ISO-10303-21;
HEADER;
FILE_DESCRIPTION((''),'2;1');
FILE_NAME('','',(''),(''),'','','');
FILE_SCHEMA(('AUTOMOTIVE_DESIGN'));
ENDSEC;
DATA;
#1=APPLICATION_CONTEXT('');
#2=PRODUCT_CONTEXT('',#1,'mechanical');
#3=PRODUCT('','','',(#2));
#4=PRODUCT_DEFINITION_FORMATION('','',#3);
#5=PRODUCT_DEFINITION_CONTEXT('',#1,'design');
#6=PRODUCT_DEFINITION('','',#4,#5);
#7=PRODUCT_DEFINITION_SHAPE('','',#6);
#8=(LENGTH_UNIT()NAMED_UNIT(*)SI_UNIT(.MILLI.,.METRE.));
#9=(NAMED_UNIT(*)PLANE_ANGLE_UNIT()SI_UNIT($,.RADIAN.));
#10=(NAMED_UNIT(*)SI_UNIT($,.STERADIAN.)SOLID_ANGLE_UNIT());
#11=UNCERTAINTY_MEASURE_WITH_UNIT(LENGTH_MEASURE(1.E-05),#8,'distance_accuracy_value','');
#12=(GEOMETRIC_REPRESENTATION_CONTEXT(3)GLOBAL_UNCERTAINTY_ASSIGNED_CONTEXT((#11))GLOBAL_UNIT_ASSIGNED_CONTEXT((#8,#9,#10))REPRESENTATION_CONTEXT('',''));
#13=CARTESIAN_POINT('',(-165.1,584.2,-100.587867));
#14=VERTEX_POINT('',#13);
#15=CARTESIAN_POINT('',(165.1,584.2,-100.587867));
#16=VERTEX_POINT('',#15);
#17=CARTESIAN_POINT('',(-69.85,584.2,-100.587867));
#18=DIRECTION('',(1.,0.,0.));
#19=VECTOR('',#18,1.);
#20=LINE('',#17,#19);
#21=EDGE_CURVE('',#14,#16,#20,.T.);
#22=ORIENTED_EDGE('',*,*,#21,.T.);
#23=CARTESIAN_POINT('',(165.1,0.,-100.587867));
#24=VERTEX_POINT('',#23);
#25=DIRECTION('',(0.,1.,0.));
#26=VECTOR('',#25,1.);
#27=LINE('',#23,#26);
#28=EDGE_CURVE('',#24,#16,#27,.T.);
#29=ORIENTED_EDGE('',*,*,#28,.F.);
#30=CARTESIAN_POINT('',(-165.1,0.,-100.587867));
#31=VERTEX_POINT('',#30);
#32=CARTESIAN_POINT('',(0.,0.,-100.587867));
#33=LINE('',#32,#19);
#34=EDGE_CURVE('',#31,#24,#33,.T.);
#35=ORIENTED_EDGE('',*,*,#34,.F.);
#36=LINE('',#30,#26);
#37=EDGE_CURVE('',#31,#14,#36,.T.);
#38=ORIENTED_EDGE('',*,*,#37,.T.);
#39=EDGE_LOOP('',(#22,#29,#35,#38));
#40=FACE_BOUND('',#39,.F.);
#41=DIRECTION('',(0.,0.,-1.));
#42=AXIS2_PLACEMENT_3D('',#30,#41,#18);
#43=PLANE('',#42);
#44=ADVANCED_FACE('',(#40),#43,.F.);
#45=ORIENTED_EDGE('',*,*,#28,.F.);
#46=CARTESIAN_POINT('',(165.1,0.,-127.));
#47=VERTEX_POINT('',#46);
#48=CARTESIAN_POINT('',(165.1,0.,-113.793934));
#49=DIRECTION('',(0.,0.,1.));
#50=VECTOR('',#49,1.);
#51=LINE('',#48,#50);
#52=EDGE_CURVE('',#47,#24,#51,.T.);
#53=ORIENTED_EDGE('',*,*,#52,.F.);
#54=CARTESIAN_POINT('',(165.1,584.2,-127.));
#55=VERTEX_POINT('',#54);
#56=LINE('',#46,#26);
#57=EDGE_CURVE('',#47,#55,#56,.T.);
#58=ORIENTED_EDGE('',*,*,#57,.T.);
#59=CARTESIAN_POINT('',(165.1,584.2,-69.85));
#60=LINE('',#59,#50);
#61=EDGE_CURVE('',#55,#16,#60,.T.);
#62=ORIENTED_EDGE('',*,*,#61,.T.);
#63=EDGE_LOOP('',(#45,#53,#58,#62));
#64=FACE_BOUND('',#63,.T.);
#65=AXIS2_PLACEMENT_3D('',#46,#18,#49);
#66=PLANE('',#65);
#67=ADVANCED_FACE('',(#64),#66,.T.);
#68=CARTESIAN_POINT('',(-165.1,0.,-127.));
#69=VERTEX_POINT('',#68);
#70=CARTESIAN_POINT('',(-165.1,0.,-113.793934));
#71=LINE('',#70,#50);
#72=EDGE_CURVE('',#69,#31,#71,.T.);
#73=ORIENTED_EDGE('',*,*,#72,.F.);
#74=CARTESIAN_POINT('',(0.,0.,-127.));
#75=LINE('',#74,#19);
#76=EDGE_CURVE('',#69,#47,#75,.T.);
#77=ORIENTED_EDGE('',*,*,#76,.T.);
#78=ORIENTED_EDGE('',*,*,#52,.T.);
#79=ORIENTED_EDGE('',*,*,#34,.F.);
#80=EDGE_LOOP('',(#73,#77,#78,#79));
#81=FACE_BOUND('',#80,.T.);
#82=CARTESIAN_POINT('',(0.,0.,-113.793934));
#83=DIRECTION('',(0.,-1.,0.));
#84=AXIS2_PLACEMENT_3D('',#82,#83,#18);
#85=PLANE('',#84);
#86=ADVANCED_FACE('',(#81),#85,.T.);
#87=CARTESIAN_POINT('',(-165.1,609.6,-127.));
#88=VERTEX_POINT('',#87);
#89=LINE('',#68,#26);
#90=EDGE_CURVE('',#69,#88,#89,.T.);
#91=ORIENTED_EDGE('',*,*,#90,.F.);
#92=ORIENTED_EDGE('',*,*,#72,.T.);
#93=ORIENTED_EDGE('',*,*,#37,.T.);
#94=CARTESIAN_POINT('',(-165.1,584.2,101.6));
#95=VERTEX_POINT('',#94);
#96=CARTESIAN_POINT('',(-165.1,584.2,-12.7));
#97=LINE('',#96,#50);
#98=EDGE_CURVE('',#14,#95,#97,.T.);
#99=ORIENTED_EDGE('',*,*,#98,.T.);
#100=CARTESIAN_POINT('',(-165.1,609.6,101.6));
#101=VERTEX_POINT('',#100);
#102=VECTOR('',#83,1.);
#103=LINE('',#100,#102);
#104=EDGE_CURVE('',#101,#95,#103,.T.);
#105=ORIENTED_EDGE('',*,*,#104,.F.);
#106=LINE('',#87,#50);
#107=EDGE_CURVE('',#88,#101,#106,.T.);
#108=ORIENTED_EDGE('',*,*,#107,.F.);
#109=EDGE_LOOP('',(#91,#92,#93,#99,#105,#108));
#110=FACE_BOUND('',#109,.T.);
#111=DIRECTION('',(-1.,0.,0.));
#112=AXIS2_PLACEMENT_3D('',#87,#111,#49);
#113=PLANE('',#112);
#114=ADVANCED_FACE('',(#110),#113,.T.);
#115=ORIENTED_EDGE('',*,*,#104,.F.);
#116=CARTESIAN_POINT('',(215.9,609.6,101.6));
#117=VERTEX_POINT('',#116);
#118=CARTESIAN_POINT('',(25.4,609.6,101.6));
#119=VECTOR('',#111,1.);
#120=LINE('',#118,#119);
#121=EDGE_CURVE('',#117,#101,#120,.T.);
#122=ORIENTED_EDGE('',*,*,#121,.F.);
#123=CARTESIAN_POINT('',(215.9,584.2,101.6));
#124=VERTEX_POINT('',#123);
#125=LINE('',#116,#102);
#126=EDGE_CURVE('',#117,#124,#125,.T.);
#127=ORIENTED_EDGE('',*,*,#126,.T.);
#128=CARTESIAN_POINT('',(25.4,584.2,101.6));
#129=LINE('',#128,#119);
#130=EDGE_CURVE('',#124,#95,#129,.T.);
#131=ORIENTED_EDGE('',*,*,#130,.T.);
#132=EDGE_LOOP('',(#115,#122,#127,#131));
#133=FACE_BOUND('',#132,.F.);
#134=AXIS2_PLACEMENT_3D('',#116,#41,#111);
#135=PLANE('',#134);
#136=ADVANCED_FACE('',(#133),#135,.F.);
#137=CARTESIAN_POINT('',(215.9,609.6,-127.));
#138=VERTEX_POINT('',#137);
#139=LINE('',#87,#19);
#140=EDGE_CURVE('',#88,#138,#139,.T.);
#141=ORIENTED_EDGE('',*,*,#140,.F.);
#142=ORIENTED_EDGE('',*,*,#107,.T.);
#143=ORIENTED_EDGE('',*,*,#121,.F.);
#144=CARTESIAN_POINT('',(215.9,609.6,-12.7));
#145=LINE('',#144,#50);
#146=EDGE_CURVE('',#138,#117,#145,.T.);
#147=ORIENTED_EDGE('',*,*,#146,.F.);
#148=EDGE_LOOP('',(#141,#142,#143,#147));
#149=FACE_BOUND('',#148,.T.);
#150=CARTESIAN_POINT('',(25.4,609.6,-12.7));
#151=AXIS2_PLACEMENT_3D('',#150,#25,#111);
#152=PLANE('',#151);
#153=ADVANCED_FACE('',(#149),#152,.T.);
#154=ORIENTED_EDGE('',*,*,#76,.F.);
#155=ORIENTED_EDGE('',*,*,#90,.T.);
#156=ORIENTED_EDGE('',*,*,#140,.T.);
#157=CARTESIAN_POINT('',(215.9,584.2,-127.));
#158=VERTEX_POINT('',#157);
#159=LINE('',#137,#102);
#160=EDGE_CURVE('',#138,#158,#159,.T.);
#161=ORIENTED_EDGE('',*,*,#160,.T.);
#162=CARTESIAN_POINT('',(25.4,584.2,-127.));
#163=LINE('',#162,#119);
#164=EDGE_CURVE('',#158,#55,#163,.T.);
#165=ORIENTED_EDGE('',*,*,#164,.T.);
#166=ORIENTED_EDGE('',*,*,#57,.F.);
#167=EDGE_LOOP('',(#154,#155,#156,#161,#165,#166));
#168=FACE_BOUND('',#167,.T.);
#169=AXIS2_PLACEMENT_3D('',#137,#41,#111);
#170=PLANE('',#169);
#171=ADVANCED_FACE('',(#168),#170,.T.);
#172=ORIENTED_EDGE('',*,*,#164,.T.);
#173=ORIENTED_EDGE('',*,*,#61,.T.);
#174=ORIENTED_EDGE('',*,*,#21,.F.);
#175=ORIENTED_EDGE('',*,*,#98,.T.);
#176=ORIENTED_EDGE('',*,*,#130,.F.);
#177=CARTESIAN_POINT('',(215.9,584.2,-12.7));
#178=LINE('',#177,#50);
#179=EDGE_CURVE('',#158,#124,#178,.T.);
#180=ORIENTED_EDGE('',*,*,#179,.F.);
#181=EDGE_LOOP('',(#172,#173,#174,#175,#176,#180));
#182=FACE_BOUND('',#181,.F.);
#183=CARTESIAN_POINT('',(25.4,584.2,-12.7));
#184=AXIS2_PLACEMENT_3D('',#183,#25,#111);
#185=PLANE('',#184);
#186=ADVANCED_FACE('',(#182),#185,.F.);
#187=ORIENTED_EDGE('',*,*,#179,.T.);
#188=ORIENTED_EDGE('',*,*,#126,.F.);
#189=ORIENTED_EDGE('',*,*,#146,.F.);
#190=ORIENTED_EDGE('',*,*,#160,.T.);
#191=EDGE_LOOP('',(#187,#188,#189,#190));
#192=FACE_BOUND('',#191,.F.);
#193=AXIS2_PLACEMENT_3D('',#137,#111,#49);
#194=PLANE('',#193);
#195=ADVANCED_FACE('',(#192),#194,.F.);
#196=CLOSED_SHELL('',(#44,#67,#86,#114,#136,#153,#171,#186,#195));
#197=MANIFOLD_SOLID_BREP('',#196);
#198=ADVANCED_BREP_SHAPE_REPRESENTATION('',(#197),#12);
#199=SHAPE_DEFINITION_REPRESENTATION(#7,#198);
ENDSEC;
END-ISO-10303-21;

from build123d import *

# Parameters (mm, degrees)
F0_W     = 330.2
F0_H     = 26.4121327996
F1_DEPTH = 609.6
F2_W     = 381
F2_H     = 228.6
F3_DEPTH = 25.4


# Not quite as in the source:
# - a feature names something its author has since deleted; it is built from what else it names


with BuildPart() as f1:
    # F0 (on Front) → F1 (new body)
    with BuildSketch(Plane.XZ):
        with Locations((0, -113.7939336002)):
            Rectangle(F0_W, F0_H)
    extrude(amount=-F1_DEPTH)

    # F2 (on face) → F3 (join)
    with BuildSketch(Plane(origin=(0, 609.6, 0), x_dir=(-1, 0, 0), z_dir=(0, 1, 0))):
        with Locations((-25.4, -12.7)):
            Rectangle(F2_W, F2_H)
    extrude(amount=-F3_DEPTH)


solid = f1.part
